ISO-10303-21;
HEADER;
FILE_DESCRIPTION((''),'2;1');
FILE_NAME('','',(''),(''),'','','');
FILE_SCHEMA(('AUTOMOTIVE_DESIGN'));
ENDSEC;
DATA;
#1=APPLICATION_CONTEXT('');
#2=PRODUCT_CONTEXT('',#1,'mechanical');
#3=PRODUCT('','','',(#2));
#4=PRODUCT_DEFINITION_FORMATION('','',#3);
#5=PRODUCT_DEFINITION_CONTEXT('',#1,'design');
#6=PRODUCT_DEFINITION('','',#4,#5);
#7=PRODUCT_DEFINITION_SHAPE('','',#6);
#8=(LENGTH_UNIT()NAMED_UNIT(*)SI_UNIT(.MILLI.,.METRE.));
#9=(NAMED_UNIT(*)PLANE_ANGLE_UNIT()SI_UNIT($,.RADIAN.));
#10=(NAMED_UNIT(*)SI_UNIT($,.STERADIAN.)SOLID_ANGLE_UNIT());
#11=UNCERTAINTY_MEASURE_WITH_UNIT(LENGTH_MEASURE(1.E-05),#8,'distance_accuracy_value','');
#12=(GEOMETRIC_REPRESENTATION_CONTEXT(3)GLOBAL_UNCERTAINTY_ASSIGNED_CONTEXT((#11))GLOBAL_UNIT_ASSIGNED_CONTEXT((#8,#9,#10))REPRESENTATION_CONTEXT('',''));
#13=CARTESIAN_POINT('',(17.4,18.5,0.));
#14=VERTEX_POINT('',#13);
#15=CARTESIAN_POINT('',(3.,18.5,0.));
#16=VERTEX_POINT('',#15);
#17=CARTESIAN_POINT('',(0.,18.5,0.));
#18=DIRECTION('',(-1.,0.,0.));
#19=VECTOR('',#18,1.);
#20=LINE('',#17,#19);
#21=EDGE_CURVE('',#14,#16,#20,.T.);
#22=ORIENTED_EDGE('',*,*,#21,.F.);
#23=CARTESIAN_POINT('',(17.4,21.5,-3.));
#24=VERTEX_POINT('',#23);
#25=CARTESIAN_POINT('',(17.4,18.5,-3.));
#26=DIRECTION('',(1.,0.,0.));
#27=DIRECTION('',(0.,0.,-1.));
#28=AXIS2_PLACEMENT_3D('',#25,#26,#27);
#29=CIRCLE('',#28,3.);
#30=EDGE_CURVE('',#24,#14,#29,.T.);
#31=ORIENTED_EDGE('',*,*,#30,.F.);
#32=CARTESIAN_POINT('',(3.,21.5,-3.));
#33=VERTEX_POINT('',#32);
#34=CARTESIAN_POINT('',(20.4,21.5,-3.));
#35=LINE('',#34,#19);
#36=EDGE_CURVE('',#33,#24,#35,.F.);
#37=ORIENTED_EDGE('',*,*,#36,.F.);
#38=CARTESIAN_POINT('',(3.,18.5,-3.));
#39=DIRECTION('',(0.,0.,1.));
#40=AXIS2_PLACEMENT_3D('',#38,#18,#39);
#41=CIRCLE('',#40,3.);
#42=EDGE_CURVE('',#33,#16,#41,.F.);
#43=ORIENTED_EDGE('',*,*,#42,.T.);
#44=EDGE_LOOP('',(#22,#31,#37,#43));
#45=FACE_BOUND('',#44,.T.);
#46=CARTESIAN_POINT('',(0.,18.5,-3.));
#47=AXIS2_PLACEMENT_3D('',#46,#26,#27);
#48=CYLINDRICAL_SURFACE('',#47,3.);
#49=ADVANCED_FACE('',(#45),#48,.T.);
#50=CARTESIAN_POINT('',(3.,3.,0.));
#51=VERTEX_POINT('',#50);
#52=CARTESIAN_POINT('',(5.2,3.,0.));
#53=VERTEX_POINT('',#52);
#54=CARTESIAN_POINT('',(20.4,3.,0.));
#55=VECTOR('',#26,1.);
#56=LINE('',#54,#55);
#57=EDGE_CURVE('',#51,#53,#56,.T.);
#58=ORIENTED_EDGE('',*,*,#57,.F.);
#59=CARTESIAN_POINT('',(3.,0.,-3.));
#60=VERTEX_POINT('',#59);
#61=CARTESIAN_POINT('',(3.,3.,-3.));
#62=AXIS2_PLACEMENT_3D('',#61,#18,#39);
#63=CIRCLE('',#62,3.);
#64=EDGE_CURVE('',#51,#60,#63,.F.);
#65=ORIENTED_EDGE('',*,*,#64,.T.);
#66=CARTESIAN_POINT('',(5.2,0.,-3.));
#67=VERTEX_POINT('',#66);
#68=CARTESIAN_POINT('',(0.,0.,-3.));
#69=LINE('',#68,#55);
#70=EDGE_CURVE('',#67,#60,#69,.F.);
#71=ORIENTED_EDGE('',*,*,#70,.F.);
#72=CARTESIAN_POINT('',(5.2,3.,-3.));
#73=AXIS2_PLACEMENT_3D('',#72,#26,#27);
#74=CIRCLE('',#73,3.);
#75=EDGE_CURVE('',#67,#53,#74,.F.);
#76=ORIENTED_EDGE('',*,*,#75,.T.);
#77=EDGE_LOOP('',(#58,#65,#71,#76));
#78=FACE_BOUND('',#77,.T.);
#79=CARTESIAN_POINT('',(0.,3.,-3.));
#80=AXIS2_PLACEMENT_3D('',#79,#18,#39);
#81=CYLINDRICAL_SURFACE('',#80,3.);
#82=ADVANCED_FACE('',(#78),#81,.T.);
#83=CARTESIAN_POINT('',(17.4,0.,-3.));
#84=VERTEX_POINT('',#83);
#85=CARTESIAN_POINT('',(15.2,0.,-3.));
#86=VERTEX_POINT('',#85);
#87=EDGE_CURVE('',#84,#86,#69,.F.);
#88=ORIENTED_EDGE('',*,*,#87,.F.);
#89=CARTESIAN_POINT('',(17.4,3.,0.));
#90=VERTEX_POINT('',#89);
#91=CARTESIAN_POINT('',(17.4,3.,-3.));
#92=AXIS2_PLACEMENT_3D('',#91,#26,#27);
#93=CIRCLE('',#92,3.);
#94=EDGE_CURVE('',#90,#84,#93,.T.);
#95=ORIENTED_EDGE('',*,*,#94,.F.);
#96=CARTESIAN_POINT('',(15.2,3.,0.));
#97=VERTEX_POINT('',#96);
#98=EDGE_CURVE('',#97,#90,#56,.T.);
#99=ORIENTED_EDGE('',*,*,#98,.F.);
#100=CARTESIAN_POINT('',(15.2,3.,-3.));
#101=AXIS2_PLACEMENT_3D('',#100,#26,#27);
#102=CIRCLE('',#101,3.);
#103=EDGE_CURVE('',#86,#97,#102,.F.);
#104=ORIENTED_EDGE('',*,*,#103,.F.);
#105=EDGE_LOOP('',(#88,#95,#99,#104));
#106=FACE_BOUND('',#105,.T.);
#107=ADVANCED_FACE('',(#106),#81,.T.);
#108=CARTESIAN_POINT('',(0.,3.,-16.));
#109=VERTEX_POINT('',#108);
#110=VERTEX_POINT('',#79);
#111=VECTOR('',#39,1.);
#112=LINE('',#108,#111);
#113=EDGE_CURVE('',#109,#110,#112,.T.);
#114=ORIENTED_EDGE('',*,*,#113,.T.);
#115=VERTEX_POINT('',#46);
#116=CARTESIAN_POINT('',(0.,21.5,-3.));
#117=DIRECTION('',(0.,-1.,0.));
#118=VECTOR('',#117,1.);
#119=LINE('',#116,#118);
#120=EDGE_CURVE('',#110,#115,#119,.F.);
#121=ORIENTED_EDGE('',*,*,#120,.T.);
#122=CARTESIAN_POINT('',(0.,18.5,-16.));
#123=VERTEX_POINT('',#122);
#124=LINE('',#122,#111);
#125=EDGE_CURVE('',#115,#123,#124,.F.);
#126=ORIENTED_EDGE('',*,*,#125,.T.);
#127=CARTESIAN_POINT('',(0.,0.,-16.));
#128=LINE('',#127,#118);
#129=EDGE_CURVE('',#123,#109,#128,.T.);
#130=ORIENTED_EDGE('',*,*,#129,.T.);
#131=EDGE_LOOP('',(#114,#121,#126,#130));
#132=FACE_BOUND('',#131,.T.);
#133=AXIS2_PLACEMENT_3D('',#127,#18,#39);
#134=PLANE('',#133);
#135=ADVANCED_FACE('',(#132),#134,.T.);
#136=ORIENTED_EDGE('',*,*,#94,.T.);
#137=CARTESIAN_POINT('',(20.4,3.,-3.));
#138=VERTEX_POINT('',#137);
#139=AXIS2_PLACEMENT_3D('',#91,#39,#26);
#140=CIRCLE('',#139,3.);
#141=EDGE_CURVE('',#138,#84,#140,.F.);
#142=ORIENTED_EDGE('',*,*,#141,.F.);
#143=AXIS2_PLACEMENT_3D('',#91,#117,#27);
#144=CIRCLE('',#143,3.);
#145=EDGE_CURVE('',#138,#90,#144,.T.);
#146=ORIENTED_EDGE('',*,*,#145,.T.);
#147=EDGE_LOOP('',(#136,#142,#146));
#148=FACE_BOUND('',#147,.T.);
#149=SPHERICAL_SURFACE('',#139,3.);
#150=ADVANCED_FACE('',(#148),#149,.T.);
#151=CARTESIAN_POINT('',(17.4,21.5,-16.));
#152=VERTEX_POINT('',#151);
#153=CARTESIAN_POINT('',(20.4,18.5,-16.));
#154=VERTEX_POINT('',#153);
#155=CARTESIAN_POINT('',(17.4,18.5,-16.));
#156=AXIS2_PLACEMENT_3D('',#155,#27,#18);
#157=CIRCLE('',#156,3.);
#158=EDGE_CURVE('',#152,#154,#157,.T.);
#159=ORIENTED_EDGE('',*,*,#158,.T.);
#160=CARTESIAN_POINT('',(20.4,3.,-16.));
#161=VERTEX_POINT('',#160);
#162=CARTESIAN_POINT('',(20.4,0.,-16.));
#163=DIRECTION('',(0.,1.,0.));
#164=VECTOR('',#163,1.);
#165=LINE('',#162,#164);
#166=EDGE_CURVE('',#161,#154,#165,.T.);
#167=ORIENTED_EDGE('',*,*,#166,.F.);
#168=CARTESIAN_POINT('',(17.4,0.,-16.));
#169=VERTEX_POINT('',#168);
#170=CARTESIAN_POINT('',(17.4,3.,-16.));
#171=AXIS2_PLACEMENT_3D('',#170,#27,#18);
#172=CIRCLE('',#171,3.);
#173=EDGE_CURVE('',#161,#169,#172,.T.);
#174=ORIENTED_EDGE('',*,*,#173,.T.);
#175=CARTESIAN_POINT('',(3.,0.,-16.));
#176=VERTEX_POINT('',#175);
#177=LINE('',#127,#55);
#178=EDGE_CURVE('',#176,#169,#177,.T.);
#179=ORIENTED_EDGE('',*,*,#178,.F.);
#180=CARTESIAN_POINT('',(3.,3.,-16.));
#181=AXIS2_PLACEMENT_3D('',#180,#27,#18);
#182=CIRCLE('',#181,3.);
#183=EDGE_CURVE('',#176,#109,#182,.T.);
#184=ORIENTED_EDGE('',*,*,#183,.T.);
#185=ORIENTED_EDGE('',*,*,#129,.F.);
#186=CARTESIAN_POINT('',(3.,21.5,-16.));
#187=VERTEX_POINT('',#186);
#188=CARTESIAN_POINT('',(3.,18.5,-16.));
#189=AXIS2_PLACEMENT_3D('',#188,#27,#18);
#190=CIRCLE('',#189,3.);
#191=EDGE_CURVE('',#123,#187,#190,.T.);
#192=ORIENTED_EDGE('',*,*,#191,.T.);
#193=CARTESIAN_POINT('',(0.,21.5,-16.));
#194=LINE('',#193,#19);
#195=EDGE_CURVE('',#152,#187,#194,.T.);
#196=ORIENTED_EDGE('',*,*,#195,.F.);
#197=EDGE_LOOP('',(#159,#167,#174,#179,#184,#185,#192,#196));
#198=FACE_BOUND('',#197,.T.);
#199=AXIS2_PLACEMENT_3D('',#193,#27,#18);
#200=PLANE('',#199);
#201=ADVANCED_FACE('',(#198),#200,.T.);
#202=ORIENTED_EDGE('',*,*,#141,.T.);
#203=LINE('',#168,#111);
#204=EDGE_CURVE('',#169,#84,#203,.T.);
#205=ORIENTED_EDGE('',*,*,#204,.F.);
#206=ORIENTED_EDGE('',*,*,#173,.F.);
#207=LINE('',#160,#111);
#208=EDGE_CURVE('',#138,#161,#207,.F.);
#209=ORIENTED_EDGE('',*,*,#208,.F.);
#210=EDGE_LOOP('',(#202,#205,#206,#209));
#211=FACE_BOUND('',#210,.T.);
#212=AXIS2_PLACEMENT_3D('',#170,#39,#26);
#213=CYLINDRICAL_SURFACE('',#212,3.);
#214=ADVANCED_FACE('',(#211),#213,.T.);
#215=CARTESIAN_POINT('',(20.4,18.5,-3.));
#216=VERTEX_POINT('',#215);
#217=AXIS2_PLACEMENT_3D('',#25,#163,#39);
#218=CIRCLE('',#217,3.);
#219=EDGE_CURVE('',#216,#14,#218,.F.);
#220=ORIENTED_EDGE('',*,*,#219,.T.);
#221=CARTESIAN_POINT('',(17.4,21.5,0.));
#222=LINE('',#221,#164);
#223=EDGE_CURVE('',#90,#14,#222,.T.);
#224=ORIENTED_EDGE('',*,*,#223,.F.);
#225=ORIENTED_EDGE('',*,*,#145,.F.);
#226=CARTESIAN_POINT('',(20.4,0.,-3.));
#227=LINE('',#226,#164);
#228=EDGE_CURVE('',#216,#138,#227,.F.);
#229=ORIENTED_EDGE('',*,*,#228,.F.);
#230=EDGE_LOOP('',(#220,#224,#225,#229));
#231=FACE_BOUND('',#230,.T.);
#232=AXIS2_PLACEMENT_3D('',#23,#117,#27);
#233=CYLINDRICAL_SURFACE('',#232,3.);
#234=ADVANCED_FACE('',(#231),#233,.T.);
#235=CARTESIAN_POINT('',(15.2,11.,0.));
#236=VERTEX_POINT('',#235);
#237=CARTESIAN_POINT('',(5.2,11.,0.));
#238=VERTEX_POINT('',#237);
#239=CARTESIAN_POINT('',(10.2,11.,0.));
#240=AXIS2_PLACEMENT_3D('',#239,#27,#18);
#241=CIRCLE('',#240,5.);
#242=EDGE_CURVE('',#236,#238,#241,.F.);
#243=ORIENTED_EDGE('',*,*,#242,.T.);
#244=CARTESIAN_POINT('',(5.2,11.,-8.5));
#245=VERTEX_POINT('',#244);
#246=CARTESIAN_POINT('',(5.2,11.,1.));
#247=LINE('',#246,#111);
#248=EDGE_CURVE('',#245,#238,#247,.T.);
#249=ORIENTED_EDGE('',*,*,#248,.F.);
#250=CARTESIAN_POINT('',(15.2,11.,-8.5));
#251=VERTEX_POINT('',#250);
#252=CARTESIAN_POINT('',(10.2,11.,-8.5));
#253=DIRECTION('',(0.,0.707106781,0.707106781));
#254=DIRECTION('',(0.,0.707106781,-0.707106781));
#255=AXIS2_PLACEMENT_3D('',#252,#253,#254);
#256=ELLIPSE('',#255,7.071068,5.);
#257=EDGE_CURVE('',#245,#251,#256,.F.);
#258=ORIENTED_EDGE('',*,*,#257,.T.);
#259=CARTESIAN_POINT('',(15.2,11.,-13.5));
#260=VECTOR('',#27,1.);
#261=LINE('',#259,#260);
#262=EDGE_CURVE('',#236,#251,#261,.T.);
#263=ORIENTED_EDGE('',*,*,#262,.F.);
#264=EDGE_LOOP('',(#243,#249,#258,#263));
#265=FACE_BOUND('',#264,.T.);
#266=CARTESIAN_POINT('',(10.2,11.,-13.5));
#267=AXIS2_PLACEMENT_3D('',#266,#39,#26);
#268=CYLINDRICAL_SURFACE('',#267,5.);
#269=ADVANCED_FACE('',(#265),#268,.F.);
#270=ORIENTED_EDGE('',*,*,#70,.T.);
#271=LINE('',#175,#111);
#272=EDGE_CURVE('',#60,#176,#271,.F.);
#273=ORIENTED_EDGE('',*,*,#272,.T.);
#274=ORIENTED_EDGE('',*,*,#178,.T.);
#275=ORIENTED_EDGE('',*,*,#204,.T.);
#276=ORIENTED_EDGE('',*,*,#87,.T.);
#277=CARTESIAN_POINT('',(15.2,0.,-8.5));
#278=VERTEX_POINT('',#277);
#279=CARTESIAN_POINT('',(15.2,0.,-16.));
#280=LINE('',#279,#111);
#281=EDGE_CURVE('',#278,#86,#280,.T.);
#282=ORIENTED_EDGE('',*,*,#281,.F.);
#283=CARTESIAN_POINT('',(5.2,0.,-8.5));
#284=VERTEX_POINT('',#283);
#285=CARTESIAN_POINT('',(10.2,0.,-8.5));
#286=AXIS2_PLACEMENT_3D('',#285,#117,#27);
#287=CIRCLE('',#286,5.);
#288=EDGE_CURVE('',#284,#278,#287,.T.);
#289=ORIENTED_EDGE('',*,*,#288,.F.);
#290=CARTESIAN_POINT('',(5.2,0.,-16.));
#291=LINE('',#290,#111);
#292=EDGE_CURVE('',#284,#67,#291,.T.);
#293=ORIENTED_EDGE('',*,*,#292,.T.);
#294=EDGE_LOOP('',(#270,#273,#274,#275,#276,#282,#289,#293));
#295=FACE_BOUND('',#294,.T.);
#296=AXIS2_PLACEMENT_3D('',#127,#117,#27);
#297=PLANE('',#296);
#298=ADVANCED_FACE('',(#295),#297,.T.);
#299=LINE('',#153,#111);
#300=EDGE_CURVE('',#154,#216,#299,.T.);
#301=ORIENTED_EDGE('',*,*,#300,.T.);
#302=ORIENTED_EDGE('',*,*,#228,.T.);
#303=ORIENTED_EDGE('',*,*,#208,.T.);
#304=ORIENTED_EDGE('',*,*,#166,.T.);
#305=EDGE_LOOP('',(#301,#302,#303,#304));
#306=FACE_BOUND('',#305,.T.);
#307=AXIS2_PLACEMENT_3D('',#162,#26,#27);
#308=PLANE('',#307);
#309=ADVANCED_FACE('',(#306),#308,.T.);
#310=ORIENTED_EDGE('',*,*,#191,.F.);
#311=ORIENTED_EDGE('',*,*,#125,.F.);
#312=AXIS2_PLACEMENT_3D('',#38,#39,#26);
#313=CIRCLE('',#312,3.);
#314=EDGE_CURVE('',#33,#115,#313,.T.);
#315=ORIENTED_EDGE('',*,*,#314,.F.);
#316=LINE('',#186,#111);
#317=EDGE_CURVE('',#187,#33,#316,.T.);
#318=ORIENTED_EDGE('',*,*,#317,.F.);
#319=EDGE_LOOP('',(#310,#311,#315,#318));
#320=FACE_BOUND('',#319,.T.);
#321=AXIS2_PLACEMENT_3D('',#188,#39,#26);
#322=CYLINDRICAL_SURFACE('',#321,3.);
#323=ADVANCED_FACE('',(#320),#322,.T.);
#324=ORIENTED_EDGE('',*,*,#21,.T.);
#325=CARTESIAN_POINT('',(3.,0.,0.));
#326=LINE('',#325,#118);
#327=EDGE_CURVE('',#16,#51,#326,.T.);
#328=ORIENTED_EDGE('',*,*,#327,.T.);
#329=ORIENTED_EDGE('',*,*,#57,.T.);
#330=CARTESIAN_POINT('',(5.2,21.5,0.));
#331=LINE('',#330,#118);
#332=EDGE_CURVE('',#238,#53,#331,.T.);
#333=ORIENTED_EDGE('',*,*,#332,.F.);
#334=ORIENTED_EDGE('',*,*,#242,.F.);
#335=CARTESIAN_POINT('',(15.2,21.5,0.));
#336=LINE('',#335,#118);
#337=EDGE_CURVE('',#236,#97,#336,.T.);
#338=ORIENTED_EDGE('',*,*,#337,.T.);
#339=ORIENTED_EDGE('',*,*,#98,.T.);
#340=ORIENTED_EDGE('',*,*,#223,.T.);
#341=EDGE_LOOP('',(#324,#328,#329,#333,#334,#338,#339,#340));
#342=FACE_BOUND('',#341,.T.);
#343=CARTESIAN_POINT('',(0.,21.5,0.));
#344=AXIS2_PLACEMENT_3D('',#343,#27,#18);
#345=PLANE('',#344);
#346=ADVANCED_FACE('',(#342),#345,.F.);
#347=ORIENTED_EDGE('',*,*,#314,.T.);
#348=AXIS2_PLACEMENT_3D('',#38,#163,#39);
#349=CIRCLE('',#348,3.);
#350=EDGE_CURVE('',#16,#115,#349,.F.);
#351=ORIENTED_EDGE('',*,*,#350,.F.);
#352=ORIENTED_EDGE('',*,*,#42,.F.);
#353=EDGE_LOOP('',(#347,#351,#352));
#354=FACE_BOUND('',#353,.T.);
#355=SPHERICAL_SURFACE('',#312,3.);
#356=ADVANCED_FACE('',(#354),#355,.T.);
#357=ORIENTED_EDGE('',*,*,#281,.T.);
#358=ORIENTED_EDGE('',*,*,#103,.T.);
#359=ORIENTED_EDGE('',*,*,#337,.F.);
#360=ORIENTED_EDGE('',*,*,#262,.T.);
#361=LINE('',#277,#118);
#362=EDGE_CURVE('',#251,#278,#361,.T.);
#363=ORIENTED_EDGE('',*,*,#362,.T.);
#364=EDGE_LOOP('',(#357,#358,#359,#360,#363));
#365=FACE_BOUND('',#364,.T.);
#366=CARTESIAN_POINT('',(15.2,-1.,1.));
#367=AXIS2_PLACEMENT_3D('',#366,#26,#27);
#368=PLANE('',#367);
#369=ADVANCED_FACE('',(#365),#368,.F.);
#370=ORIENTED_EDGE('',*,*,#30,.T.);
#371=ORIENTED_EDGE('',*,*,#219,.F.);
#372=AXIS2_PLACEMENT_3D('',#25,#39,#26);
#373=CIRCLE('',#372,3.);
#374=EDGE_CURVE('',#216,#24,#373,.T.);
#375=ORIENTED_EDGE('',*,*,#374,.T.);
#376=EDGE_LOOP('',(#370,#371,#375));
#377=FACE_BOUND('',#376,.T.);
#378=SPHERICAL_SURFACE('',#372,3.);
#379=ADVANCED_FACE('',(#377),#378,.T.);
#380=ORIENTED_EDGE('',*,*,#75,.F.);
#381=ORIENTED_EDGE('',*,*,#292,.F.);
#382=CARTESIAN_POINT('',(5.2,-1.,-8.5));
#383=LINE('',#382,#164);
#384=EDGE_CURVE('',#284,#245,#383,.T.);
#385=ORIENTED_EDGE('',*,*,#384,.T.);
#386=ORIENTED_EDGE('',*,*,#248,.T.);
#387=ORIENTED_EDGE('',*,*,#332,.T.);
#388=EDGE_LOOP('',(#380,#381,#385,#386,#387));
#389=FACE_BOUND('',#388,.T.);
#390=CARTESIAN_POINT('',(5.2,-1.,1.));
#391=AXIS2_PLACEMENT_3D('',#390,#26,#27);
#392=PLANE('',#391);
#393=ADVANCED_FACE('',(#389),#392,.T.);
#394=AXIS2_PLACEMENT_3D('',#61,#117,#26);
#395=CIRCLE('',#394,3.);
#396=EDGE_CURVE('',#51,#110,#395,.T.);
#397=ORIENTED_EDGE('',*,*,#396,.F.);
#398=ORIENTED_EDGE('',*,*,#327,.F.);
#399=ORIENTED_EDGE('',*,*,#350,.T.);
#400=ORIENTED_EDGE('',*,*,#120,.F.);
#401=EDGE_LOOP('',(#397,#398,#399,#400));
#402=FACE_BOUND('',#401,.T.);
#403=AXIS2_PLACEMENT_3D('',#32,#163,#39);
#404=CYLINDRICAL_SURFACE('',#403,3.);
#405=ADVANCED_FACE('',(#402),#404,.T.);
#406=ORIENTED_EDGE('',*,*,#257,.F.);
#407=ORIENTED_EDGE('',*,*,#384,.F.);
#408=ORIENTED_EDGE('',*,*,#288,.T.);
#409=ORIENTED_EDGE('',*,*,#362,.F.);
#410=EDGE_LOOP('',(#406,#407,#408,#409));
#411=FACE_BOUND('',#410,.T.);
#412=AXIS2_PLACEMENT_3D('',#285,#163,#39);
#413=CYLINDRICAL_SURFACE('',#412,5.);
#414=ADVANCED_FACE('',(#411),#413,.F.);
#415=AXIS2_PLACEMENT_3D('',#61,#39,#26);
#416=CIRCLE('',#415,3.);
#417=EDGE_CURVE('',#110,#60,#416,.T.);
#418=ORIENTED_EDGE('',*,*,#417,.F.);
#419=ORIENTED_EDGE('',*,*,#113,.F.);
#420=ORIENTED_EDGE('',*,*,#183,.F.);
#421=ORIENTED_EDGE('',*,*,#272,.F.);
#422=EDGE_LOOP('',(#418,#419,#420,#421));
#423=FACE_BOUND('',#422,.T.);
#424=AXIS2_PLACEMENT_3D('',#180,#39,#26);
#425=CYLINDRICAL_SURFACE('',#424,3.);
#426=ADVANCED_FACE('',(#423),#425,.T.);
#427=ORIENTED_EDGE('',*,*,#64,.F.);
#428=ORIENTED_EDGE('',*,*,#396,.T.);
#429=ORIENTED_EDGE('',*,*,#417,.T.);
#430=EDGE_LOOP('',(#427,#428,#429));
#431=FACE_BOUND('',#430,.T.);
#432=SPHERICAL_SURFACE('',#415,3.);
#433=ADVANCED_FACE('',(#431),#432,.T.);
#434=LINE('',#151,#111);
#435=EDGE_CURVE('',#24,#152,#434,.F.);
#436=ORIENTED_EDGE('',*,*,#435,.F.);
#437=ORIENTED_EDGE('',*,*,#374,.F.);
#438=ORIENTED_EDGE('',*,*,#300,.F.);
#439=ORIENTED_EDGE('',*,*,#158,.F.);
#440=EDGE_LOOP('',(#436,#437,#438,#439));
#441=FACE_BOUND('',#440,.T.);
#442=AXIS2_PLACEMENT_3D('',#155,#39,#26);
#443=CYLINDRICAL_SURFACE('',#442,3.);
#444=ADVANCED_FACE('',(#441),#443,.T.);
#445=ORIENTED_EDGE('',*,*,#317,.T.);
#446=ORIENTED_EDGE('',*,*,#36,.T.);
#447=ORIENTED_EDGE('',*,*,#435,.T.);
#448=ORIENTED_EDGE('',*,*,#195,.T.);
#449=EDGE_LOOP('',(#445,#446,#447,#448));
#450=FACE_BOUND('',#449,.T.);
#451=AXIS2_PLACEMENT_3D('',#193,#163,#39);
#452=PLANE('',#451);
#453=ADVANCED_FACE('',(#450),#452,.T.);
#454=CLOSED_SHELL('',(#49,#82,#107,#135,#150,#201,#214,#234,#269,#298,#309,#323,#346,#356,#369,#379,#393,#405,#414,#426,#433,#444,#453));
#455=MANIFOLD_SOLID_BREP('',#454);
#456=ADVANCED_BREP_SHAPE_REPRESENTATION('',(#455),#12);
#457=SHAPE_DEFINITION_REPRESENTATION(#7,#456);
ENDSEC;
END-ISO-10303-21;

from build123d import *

# Parameters (mm, degrees)
SKETCH1_W      = 20.4
SKETCH1_H      = 21.5
EXTRUDE1_DEPTH = 16
FILLET8_R      = 3
SKETCH2_W      = 14.5
SKETCH2_H      = 17
EXTRUDE2_DEPTH = 5
FILLET9_R      = 5
FILLET10_R     = 5


# Some blends are built 0.0001 mm under size
with BuildPart() as part:
    # Sketch1 → Extrude1 (new body)
    with BuildSketch(Plane.XY):
        with Locations((10.2, 10.75)):
            Rectangle(SKETCH1_W, SKETCH1_H)
    extrude(amount=-EXTRUDE1_DEPTH)

    # Fillet8
    fillet8_edges = [part.edges().sort_by_distance(p)[0] for p in [
        (10.2, 21.5, 0),
        (20.4, 10.75, 0),
        (10.2, 0, 0),
        (0, 10.75, 0),
        (0, 21.5, -8),
        (20.4, 21.5, -8),
        (20.4, 0, -8),
        (0, 0, -8),
    ]]
    fillet(fillet8_edges, radius=FILLET8_R)

    # Sketch2 → Extrude2 (cut, symmetric)
    with BuildSketch(Plane(origin=(10.2, 0, 0), x_dir=(0, 0, -1), z_dir=(1, 0, 0))):
        with Locations((6.25, 7.5)):
            Rectangle(SKETCH2_W, SKETCH2_H)
    extrude(amount=EXTRUDE2_DEPTH, both=True, mode=Mode.SUBTRACT)

    # Fillet9
    fillet9_edges = [part.edges().sort_by_distance(p)[0] for p in [
        (5.2, 16, -6.75),
        (15.2, 16, -6.75),
    ]]
    fillet(fillet9_edges, radius=FILLET9_R - 0.0001)  # a hair under: the kernel refuses the full size

    # Fillet10
    # the kernel refuses this fillet: 5 mm, written as the material it adds along each edge
    with BuildSketch(Plane(origin=(5.2, 23.5001, -13.5), x_dir=(0, 0, 1), z_dir=(0, -1, 0))) as fillet10_piece_1_section:
        with BuildLine():
            CenterArc((FILLET10_R, -FILLET10_R), FILLET10_R, 90, 90)
            Line((0, -FILLET10_R), (0, 0))
            Line((0, 0), (FILLET10_R, 0))
        make_face()
    fillet10_piece_1 = extrude(amount=23.5001, mode=Mode.PRIVATE)
    fillet10_piece_1 = split(fillet10_piece_1, bisect_by=Plane(origin=(6.690730553, 21.5, -12.634344102), z_dir=(0, -1, 0)), keep=Keep.TOP, mode=Mode.PRIVATE)
    add(fillet10_piece_1)
    with BuildSketch(Plane(origin=(15.2, 23.5001, -13.5), x_dir=(-1, 0, 0), z_dir=(0, -1, 0))) as fillet10_piece_2_section:
        with BuildLine():
            CenterArc((FILLET10_R, -FILLET10_R), FILLET10_R, 90, 90)
            Line((0, -FILLET10_R), (0, 0))
            Line((0, 0), (FILLET10_R, 0))
        make_face()
    fillet10_piece_2 = extrude(amount=23.5001, mode=Mode.PRIVATE)
    fillet10_piece_2 = split(fillet10_piece_2, bisect_by=Plane(origin=(13.709267183, 21.5, -12.634319822), z_dir=(0, -1, 0)), keep=Keep.TOP, mode=Mode.PRIVATE)
    add(fillet10_piece_2)


solid = part.part
